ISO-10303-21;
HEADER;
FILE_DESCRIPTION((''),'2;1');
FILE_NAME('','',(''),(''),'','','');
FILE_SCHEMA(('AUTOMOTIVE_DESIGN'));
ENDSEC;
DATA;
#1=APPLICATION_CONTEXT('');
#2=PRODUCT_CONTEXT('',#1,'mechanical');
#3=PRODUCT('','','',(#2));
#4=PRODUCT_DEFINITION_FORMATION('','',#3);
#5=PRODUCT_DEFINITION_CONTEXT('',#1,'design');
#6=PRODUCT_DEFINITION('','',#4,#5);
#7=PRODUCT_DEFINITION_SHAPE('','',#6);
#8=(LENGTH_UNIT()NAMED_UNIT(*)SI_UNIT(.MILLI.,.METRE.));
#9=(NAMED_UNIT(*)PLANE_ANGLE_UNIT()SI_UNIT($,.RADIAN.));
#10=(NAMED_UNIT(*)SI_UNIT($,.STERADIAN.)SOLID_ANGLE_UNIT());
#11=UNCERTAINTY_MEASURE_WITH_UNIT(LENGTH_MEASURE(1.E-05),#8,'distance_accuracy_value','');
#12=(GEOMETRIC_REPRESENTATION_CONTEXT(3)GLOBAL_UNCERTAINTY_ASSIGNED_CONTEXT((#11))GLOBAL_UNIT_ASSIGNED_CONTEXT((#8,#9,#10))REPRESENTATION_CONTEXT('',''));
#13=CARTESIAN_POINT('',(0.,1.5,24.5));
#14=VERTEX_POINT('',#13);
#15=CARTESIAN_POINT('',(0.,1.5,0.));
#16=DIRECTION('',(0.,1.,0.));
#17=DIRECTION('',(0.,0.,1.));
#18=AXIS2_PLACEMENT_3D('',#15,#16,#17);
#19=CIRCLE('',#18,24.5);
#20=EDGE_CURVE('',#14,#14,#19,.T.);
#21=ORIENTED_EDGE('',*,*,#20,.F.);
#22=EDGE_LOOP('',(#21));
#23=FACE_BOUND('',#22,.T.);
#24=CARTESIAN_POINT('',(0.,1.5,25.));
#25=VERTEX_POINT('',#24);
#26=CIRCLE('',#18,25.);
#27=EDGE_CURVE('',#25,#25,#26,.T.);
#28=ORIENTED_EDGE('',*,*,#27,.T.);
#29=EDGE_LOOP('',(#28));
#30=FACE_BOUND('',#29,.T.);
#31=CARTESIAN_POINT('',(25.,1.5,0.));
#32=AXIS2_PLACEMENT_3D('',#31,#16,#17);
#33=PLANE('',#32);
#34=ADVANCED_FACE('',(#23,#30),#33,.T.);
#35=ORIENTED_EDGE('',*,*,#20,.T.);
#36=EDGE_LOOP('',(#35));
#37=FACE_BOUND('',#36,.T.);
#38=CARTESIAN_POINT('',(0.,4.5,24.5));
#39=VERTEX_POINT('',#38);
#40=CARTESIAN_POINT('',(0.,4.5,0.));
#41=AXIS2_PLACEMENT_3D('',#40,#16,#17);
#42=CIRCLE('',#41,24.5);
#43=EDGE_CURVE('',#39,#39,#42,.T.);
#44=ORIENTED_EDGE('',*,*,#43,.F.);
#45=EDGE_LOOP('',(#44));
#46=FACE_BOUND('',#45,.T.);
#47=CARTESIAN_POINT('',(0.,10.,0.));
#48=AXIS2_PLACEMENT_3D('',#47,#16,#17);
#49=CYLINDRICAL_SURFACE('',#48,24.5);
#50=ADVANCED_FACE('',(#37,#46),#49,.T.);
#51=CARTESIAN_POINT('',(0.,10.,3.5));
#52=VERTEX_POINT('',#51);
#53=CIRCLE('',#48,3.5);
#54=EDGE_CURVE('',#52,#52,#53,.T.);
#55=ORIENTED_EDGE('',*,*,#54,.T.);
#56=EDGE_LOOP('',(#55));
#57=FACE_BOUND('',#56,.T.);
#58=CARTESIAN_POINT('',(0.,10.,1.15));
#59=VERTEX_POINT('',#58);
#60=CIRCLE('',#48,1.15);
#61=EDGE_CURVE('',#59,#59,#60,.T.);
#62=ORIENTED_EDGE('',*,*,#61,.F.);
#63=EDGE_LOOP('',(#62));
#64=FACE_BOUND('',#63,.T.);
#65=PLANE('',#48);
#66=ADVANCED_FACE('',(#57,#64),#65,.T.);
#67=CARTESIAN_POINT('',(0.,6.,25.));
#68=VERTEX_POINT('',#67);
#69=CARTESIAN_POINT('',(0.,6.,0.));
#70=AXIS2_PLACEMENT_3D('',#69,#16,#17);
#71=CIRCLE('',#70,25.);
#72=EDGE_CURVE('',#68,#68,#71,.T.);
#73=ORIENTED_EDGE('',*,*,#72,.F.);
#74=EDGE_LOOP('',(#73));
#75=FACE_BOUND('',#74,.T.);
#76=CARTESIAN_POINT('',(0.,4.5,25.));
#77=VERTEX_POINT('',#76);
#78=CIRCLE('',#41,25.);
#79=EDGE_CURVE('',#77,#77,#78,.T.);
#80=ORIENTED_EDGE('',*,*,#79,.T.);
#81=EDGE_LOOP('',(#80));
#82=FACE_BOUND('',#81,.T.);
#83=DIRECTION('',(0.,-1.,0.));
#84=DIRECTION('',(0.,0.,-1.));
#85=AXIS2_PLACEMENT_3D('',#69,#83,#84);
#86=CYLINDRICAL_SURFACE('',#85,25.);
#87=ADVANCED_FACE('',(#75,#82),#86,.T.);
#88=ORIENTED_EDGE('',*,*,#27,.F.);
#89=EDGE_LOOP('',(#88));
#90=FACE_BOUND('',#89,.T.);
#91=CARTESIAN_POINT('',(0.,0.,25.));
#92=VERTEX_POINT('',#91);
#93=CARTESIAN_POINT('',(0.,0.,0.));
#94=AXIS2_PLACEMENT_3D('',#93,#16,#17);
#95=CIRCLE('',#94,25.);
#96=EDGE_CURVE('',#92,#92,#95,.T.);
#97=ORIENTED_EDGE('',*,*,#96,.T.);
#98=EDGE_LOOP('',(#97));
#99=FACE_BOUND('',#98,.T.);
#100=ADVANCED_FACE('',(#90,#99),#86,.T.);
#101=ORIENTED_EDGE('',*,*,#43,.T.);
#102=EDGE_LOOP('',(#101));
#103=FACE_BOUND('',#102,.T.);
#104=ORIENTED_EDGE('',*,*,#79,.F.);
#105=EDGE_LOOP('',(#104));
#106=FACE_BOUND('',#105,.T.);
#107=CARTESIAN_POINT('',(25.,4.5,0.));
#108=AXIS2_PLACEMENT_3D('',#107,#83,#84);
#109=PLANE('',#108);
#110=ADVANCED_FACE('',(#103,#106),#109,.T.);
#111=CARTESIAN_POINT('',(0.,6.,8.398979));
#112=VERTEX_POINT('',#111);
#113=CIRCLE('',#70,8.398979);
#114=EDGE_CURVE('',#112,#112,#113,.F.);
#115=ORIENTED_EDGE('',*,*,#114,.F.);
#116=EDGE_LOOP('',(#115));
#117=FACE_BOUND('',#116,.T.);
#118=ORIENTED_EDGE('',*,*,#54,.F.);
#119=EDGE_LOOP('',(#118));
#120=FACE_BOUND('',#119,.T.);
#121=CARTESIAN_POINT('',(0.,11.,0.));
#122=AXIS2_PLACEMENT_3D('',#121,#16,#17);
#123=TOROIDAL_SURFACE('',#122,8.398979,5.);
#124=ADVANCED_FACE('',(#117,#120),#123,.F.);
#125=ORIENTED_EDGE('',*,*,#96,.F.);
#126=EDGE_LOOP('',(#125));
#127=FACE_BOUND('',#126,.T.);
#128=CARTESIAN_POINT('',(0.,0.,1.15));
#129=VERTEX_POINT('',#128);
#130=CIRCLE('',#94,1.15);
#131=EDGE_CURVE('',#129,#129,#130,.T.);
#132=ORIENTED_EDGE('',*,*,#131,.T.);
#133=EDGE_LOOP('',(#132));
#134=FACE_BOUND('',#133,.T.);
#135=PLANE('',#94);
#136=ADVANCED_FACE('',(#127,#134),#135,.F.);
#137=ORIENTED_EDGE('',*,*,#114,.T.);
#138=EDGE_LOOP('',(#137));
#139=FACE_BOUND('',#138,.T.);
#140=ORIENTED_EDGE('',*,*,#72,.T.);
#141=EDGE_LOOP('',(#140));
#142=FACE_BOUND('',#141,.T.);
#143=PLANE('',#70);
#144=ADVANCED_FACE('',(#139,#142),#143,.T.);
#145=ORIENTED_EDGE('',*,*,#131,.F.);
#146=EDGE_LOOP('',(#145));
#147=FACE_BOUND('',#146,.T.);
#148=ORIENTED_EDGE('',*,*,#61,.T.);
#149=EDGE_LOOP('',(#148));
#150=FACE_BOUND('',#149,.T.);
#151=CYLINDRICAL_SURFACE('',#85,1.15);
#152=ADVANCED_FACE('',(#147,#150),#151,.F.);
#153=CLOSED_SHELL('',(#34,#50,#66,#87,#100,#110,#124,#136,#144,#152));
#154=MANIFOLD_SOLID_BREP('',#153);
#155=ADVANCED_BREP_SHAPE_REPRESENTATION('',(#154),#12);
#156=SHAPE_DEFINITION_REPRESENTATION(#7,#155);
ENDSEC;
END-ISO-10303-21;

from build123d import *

# Parameters (mm, degrees)
SKETCH1_R           = 25
SKETCH1_R_2         = 1.15
BOSS_EXTRUDE1_DEPTH = 6
SKETCH1_3_R         = 3.5
SKETCH1_3_R_2       = 1.15
BOSS_EXTRUDE2_DEPTH = 10
FILLET1_R           = 5
SKETCH2_W           = 0.5
SKETCH2_H           = 3


with BuildPart() as part:
    # Sketch1 → Boss-Extrude1 (new body)
    with BuildSketch(Plane(origin=(0, 0, 0), x_dir=(1, 0, 0), z_dir=(0, 1, 0))):
        with Locations(Location((0, 0, 0), (0, 0, 270))):
            Circle(SKETCH1_R)
        with Locations(Location((0, 0, 0), (0, 0, 270))):
            Circle(SKETCH1_R_2, mode=Mode.SUBTRACT)
    extrude(amount=BOSS_EXTRUDE1_DEPTH)

    # Sketch1<3> → Boss-Extrude2 (add)
    with BuildSketch(Plane(origin=(0, 0, 0), x_dir=(1, 0, 0), z_dir=(0, 1, 0))):
        with Locations(Location((0, 0, 0), (0, 0, 270))):
            Circle(SKETCH1_3_R)
        with Locations(Location((0, 0, 0), (0, 0, 270))):
            Circle(SKETCH1_3_R_2, mode=Mode.SUBTRACT)
    extrude(amount=BOSS_EXTRUDE2_DEPTH)

    # Fillet1
    # the kernel refuses this fillet: 5 mm, written as the material it adds along each edge
    with BuildSketch(Plane(origin=(0, 6, 0), x_dir=(0, 0, 1), z_dir=(1, 0, 0))) as fillet1_piece_1:
        with BuildLine():
            CenterArc((8.398979486, -5), FILLET1_R, 90, 78.463040967)
            Line((3.5, -4), (3.40202041, -3.98))
            ThreePointArc((3.40202041, -3.98), (3.4, -2), (3.4, 0))
            Line((3.4, 0), (3.5, 0.1))
            Line((3.5, 0.1), (8.398979486, 0.1))
            Line((8.398979486, 0.1), (8.398979486, 0))
        make_face()
    revolve(axis=Axis((0, 6, 0), (0, -1, 0)))

    # Sketch2 → Cut-Revolve1 (revolve, cut)
    with BuildSketch(Plane.XY, mode=Mode.PRIVATE) as cut_revolve1_sk:
        with Locations((24.75, 3)):
            Rectangle(SKETCH2_W, SKETCH2_H)
    revolve(cut_revolve1_sk.sketch.rotate(Axis((0, 6, 0), (0, -1, 0)), 90), axis=Axis((0, 6, 0), (0, -1, 0)), mode=Mode.SUBTRACT)


solid = part.part
